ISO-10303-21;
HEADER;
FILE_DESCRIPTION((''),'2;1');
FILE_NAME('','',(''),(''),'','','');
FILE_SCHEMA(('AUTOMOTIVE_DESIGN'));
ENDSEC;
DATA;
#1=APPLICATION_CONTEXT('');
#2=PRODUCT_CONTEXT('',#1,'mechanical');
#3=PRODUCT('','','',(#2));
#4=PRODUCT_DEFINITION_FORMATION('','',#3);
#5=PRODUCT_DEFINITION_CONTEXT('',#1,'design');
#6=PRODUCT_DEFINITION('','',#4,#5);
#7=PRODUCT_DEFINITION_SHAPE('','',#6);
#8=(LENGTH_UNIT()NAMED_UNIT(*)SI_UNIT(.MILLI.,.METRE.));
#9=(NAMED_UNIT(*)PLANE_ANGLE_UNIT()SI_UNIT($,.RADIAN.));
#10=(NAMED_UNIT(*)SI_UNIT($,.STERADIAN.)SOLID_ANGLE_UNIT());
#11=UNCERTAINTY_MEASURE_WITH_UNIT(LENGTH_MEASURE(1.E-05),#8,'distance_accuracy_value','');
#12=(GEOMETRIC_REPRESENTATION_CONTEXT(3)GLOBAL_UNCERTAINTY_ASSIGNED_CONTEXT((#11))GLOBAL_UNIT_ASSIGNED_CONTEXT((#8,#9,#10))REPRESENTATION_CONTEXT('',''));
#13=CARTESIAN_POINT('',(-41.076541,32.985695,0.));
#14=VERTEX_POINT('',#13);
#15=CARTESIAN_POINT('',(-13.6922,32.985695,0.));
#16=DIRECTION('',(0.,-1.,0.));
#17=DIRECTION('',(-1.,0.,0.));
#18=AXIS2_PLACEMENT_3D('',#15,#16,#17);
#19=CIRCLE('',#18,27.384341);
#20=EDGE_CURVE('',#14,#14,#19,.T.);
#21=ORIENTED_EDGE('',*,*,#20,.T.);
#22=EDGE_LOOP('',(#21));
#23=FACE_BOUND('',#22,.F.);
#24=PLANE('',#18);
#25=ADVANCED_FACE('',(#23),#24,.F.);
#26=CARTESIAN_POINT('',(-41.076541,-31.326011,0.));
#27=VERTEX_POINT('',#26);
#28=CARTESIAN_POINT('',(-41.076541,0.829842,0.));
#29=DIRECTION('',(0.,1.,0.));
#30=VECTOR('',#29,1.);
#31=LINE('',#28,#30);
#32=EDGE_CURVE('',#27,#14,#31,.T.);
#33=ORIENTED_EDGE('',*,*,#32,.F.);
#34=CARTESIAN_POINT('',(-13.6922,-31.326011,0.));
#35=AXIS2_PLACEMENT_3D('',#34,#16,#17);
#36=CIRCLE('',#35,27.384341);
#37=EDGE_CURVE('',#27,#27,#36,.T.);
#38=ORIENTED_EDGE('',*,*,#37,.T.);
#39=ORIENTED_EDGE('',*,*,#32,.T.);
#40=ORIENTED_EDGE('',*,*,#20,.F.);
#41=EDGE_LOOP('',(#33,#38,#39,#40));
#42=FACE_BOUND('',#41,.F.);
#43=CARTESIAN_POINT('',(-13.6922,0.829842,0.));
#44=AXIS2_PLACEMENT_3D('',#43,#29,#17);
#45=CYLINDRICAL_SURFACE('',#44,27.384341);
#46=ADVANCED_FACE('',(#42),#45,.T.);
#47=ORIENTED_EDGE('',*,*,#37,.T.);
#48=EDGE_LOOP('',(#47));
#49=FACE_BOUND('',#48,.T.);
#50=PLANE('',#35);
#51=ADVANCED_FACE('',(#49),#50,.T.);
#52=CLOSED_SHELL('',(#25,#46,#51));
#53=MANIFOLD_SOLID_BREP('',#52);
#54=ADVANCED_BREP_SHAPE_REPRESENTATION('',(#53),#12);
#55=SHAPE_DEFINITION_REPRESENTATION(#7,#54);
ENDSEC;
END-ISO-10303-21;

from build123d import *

# Parameters (mm, degrees)
F0_W     = 25.7850475609
F0_H     = 69.0255090594
F1_DEPTH = 97.1566960216
F2_W     = 29.3421596289
F2_H     = 68.0039366707
F3_DEPTH = 74.8365670443
F5_W     = 27.3843407631
F5_H     = 64.3117055297


with BuildPart() as f1:
    # F0 (on Top) → F1 (new body)
    with BuildSketch(Plane.XY):
        with Locations((44.0845470876, 10.3604607284)):
            Rectangle(F0_W, F0_H)
    extrude(amount=F1_DEPTH)

    # F2 (on face) → F3 (join)
    with BuildSketch(Plane.YZ.offset(56.977070868)):
        with Locations((14.6710798144, 47.3301787861)):
            Rectangle(F2_W, F2_H)
    extrude(amount=-F3_DEPTH)


with BuildPart() as f6:
    # F5 (on Top) → F6 (revolve)
    with BuildSketch(Plane.XY):
        with Locations((-27.3843705654, 0.8298419416)):
            Rectangle(F5_W, F5_H)
    revolve(axis=Axis((-13.6922001839, 0.8298419416, 0), (0, -1, 0)))


solid = f6.part
